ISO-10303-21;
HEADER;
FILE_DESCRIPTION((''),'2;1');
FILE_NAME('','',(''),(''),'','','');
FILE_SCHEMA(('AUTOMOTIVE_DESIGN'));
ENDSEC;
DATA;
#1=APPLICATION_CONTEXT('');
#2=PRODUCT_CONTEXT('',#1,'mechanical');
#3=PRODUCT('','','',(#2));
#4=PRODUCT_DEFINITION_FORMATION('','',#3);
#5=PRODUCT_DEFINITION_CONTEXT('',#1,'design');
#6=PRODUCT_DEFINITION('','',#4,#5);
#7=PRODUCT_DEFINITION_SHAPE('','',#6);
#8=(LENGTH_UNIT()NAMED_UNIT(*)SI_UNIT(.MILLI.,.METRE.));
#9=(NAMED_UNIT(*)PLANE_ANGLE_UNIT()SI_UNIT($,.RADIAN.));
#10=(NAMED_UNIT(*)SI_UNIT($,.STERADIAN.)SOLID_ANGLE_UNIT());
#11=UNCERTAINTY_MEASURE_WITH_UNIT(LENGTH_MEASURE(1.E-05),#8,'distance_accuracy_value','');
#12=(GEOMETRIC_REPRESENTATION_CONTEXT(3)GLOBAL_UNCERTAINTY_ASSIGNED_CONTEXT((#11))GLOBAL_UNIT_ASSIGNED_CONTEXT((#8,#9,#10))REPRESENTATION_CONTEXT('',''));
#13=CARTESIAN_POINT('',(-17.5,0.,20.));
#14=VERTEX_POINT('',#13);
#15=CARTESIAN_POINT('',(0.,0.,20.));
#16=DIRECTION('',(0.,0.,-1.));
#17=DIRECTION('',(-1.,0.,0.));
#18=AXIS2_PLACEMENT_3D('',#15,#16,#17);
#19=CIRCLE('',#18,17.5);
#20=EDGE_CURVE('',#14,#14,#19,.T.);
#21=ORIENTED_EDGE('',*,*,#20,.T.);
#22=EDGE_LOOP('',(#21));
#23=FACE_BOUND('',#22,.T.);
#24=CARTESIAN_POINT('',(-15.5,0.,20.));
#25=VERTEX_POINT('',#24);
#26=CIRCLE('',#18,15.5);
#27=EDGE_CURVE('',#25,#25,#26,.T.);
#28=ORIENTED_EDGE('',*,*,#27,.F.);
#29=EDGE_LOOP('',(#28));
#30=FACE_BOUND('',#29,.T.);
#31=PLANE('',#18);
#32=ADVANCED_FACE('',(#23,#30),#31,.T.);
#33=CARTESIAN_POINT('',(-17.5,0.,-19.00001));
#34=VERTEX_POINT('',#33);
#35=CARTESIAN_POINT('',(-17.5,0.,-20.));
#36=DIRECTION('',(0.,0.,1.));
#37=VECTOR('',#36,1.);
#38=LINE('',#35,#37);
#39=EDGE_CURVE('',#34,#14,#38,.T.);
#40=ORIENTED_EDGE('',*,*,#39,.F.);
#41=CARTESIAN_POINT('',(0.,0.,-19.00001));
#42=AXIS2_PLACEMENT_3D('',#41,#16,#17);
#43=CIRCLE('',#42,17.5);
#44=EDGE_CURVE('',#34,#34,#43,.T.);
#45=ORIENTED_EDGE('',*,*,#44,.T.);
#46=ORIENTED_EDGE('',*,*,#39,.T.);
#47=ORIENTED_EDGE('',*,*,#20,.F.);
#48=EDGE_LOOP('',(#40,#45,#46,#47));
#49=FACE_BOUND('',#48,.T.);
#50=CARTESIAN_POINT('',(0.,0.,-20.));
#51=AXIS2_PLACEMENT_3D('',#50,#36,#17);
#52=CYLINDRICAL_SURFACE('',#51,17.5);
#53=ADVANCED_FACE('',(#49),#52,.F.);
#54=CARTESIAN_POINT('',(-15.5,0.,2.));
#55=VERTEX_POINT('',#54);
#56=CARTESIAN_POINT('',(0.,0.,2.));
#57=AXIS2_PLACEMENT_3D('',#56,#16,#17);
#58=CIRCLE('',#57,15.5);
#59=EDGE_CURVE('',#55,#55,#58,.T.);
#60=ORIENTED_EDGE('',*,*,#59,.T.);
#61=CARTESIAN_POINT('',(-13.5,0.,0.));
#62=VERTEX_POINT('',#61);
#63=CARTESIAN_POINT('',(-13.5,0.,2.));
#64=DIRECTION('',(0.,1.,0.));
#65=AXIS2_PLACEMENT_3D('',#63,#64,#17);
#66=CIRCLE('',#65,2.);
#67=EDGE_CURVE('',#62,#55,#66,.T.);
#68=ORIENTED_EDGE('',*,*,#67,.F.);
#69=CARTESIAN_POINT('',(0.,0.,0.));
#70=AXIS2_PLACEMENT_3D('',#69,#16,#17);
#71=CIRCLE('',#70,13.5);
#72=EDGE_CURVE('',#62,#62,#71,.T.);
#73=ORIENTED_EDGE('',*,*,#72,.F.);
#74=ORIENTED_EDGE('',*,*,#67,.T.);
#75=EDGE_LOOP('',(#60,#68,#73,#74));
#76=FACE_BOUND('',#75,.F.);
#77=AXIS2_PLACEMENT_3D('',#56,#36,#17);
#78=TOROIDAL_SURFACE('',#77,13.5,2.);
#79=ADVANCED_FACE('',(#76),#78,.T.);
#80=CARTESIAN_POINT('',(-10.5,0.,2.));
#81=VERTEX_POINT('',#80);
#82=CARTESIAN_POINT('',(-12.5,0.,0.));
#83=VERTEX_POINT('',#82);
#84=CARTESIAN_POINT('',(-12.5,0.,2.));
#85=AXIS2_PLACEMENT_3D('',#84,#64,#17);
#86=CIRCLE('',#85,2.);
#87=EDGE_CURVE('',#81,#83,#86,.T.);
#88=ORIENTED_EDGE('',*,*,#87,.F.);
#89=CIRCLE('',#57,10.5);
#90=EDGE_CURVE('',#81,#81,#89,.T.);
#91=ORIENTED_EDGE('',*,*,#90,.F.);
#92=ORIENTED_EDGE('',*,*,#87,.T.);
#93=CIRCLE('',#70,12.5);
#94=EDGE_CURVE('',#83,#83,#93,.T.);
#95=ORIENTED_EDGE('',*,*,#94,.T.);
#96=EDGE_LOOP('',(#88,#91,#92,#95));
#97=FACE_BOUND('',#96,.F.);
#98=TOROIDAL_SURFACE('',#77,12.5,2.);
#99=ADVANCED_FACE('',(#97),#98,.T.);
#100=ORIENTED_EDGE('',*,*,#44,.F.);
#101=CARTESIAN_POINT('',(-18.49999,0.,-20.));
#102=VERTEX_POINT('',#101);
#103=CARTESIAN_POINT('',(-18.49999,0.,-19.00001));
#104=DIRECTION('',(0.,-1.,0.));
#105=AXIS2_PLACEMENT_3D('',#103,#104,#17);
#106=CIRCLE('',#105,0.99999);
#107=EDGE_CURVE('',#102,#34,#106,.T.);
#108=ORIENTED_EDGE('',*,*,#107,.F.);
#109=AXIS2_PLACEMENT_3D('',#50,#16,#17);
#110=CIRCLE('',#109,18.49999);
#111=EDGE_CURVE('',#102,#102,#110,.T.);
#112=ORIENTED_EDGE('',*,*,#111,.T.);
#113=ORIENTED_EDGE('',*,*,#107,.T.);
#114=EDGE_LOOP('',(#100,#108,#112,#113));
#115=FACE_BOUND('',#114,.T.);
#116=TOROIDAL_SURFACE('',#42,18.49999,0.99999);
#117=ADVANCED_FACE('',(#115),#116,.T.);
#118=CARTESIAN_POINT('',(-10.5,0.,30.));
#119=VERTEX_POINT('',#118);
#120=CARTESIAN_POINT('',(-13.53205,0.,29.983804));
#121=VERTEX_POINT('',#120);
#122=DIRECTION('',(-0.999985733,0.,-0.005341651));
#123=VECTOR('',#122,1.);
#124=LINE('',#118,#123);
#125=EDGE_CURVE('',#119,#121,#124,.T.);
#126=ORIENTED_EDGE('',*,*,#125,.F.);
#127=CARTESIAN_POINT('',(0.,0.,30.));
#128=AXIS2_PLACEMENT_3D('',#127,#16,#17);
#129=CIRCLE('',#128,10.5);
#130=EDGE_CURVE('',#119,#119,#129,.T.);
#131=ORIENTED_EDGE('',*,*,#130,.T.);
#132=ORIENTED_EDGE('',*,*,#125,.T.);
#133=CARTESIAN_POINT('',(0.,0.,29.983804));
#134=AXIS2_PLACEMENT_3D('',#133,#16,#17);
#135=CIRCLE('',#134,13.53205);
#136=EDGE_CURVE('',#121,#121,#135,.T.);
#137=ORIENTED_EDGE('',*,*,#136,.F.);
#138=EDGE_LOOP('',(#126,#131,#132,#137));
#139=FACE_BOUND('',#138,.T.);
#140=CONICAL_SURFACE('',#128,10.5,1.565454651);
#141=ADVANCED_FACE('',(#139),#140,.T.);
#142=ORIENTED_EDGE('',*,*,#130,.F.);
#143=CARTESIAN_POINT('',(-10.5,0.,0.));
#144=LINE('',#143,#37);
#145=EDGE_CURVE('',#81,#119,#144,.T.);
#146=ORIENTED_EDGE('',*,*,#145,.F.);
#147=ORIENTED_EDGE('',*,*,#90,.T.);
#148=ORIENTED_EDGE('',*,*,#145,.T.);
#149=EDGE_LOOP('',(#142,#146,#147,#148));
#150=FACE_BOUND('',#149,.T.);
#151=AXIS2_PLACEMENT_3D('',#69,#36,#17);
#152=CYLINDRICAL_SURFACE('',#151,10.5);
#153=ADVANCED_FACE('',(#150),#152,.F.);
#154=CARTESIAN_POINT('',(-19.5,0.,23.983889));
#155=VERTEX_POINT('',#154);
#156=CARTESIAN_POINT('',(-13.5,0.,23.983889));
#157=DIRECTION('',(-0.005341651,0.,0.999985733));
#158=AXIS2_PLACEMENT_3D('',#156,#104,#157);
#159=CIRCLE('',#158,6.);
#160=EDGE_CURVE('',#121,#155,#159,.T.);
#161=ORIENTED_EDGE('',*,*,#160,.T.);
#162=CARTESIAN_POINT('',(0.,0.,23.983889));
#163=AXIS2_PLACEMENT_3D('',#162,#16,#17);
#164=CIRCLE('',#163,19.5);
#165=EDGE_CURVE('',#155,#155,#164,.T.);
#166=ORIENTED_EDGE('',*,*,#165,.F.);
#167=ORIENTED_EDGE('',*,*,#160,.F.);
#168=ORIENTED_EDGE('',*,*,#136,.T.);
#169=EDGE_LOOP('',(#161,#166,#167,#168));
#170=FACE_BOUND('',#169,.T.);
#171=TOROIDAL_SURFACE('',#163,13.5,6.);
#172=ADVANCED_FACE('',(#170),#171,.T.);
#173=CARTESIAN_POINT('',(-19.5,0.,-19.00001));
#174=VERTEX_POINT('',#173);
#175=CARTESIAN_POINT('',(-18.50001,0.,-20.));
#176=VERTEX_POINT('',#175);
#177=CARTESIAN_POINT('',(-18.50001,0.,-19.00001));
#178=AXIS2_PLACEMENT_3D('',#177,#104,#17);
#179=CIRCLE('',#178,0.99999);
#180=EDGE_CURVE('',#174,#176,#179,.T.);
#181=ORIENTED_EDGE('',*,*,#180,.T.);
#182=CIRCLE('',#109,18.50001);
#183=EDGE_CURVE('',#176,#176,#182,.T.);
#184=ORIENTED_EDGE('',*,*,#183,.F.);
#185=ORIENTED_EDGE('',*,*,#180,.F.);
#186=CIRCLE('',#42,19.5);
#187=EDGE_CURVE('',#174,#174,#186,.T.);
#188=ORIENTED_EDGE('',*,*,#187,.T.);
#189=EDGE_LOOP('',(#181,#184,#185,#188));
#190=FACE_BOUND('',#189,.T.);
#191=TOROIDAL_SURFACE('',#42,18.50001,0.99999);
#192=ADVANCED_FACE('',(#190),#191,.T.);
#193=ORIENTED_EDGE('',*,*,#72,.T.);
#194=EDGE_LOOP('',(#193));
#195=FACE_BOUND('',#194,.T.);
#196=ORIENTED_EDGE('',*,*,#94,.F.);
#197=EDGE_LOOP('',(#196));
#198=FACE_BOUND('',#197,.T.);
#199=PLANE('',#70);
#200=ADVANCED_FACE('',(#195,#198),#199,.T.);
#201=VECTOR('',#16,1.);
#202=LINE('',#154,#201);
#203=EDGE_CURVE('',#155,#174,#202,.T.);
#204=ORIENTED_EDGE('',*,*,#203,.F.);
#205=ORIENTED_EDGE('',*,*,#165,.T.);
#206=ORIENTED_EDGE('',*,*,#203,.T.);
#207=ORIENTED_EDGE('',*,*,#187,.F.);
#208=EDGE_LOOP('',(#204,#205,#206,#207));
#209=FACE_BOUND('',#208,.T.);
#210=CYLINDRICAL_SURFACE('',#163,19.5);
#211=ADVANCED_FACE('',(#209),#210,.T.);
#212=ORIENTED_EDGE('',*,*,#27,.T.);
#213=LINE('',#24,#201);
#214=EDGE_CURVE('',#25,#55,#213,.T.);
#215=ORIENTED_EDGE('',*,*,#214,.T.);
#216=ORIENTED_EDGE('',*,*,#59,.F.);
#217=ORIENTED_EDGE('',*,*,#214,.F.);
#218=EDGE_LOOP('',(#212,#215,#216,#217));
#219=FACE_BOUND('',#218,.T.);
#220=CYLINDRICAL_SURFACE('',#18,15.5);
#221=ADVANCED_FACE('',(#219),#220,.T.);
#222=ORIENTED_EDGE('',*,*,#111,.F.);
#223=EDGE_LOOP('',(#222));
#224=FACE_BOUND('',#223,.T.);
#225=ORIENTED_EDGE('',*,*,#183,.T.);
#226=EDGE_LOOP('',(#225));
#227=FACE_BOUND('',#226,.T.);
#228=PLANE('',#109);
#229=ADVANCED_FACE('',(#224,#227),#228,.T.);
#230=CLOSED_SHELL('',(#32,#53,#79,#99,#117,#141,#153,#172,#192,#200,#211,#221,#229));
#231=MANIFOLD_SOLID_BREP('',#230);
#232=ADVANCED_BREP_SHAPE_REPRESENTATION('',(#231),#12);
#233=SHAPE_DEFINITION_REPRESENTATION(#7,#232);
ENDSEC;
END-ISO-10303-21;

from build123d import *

# Parameters (mm, degrees)
F2_R = 0.99999
F3_R = 2


# Not quite as in the source:
# - a fillet or chamfer is up to 0.001 mm smaller than in the source, because OpenCascade refuses the exact size


with BuildPart() as f1:
    # F0 (on Front) → F1 (revolve)
    with BuildSketch(Plane.XZ):
        with BuildLine():
            Line((-10.5, 0), (-10.5, 30))
            Line((-10.5, 30), (-13.532049904, 29.9838036175))
            ThreePointArc((-13.532049904, 29.9838036175), (-17.7539569476, 28.2151833802), (-19.5, 23.9838892179))
            Line((-19.5, 23.9838892179), (-19.5, 20))
            Line((-19.5, 20), (-19.5, -20))
            Line((-19.5, -20), (-17.5, -20))
            Line((-17.5, -20), (-17.5, 20))
            Line((-17.5, 20), (-15.5, 20))
            Line((-15.5, 20), (-15.5, 0))
            Line((-15.5, 0), (-10.5, 0))
        make_face()
    revolve(axis=Axis((0, 0, 11.9062974118), (0, 0, -1)))

    # F2 (radius 1 in the source; OpenCascade refuses exactly that, so slightly less here)
    f2_edges = [f1.edges().sort_by_distance(p)[0] for p in [
        (17.5, 0, -20),
        (19.5, 0, -20),
    ]]
    fillet(f2_edges, radius=F2_R)

    # F3
    f3_edges = [f1.edges().sort_by_distance(p)[0] for p in [
        (10.5, 0, 0),
        (15.5, 0, 0),
    ]]
    fillet(f3_edges, radius=F3_R)


solid = f1.part
